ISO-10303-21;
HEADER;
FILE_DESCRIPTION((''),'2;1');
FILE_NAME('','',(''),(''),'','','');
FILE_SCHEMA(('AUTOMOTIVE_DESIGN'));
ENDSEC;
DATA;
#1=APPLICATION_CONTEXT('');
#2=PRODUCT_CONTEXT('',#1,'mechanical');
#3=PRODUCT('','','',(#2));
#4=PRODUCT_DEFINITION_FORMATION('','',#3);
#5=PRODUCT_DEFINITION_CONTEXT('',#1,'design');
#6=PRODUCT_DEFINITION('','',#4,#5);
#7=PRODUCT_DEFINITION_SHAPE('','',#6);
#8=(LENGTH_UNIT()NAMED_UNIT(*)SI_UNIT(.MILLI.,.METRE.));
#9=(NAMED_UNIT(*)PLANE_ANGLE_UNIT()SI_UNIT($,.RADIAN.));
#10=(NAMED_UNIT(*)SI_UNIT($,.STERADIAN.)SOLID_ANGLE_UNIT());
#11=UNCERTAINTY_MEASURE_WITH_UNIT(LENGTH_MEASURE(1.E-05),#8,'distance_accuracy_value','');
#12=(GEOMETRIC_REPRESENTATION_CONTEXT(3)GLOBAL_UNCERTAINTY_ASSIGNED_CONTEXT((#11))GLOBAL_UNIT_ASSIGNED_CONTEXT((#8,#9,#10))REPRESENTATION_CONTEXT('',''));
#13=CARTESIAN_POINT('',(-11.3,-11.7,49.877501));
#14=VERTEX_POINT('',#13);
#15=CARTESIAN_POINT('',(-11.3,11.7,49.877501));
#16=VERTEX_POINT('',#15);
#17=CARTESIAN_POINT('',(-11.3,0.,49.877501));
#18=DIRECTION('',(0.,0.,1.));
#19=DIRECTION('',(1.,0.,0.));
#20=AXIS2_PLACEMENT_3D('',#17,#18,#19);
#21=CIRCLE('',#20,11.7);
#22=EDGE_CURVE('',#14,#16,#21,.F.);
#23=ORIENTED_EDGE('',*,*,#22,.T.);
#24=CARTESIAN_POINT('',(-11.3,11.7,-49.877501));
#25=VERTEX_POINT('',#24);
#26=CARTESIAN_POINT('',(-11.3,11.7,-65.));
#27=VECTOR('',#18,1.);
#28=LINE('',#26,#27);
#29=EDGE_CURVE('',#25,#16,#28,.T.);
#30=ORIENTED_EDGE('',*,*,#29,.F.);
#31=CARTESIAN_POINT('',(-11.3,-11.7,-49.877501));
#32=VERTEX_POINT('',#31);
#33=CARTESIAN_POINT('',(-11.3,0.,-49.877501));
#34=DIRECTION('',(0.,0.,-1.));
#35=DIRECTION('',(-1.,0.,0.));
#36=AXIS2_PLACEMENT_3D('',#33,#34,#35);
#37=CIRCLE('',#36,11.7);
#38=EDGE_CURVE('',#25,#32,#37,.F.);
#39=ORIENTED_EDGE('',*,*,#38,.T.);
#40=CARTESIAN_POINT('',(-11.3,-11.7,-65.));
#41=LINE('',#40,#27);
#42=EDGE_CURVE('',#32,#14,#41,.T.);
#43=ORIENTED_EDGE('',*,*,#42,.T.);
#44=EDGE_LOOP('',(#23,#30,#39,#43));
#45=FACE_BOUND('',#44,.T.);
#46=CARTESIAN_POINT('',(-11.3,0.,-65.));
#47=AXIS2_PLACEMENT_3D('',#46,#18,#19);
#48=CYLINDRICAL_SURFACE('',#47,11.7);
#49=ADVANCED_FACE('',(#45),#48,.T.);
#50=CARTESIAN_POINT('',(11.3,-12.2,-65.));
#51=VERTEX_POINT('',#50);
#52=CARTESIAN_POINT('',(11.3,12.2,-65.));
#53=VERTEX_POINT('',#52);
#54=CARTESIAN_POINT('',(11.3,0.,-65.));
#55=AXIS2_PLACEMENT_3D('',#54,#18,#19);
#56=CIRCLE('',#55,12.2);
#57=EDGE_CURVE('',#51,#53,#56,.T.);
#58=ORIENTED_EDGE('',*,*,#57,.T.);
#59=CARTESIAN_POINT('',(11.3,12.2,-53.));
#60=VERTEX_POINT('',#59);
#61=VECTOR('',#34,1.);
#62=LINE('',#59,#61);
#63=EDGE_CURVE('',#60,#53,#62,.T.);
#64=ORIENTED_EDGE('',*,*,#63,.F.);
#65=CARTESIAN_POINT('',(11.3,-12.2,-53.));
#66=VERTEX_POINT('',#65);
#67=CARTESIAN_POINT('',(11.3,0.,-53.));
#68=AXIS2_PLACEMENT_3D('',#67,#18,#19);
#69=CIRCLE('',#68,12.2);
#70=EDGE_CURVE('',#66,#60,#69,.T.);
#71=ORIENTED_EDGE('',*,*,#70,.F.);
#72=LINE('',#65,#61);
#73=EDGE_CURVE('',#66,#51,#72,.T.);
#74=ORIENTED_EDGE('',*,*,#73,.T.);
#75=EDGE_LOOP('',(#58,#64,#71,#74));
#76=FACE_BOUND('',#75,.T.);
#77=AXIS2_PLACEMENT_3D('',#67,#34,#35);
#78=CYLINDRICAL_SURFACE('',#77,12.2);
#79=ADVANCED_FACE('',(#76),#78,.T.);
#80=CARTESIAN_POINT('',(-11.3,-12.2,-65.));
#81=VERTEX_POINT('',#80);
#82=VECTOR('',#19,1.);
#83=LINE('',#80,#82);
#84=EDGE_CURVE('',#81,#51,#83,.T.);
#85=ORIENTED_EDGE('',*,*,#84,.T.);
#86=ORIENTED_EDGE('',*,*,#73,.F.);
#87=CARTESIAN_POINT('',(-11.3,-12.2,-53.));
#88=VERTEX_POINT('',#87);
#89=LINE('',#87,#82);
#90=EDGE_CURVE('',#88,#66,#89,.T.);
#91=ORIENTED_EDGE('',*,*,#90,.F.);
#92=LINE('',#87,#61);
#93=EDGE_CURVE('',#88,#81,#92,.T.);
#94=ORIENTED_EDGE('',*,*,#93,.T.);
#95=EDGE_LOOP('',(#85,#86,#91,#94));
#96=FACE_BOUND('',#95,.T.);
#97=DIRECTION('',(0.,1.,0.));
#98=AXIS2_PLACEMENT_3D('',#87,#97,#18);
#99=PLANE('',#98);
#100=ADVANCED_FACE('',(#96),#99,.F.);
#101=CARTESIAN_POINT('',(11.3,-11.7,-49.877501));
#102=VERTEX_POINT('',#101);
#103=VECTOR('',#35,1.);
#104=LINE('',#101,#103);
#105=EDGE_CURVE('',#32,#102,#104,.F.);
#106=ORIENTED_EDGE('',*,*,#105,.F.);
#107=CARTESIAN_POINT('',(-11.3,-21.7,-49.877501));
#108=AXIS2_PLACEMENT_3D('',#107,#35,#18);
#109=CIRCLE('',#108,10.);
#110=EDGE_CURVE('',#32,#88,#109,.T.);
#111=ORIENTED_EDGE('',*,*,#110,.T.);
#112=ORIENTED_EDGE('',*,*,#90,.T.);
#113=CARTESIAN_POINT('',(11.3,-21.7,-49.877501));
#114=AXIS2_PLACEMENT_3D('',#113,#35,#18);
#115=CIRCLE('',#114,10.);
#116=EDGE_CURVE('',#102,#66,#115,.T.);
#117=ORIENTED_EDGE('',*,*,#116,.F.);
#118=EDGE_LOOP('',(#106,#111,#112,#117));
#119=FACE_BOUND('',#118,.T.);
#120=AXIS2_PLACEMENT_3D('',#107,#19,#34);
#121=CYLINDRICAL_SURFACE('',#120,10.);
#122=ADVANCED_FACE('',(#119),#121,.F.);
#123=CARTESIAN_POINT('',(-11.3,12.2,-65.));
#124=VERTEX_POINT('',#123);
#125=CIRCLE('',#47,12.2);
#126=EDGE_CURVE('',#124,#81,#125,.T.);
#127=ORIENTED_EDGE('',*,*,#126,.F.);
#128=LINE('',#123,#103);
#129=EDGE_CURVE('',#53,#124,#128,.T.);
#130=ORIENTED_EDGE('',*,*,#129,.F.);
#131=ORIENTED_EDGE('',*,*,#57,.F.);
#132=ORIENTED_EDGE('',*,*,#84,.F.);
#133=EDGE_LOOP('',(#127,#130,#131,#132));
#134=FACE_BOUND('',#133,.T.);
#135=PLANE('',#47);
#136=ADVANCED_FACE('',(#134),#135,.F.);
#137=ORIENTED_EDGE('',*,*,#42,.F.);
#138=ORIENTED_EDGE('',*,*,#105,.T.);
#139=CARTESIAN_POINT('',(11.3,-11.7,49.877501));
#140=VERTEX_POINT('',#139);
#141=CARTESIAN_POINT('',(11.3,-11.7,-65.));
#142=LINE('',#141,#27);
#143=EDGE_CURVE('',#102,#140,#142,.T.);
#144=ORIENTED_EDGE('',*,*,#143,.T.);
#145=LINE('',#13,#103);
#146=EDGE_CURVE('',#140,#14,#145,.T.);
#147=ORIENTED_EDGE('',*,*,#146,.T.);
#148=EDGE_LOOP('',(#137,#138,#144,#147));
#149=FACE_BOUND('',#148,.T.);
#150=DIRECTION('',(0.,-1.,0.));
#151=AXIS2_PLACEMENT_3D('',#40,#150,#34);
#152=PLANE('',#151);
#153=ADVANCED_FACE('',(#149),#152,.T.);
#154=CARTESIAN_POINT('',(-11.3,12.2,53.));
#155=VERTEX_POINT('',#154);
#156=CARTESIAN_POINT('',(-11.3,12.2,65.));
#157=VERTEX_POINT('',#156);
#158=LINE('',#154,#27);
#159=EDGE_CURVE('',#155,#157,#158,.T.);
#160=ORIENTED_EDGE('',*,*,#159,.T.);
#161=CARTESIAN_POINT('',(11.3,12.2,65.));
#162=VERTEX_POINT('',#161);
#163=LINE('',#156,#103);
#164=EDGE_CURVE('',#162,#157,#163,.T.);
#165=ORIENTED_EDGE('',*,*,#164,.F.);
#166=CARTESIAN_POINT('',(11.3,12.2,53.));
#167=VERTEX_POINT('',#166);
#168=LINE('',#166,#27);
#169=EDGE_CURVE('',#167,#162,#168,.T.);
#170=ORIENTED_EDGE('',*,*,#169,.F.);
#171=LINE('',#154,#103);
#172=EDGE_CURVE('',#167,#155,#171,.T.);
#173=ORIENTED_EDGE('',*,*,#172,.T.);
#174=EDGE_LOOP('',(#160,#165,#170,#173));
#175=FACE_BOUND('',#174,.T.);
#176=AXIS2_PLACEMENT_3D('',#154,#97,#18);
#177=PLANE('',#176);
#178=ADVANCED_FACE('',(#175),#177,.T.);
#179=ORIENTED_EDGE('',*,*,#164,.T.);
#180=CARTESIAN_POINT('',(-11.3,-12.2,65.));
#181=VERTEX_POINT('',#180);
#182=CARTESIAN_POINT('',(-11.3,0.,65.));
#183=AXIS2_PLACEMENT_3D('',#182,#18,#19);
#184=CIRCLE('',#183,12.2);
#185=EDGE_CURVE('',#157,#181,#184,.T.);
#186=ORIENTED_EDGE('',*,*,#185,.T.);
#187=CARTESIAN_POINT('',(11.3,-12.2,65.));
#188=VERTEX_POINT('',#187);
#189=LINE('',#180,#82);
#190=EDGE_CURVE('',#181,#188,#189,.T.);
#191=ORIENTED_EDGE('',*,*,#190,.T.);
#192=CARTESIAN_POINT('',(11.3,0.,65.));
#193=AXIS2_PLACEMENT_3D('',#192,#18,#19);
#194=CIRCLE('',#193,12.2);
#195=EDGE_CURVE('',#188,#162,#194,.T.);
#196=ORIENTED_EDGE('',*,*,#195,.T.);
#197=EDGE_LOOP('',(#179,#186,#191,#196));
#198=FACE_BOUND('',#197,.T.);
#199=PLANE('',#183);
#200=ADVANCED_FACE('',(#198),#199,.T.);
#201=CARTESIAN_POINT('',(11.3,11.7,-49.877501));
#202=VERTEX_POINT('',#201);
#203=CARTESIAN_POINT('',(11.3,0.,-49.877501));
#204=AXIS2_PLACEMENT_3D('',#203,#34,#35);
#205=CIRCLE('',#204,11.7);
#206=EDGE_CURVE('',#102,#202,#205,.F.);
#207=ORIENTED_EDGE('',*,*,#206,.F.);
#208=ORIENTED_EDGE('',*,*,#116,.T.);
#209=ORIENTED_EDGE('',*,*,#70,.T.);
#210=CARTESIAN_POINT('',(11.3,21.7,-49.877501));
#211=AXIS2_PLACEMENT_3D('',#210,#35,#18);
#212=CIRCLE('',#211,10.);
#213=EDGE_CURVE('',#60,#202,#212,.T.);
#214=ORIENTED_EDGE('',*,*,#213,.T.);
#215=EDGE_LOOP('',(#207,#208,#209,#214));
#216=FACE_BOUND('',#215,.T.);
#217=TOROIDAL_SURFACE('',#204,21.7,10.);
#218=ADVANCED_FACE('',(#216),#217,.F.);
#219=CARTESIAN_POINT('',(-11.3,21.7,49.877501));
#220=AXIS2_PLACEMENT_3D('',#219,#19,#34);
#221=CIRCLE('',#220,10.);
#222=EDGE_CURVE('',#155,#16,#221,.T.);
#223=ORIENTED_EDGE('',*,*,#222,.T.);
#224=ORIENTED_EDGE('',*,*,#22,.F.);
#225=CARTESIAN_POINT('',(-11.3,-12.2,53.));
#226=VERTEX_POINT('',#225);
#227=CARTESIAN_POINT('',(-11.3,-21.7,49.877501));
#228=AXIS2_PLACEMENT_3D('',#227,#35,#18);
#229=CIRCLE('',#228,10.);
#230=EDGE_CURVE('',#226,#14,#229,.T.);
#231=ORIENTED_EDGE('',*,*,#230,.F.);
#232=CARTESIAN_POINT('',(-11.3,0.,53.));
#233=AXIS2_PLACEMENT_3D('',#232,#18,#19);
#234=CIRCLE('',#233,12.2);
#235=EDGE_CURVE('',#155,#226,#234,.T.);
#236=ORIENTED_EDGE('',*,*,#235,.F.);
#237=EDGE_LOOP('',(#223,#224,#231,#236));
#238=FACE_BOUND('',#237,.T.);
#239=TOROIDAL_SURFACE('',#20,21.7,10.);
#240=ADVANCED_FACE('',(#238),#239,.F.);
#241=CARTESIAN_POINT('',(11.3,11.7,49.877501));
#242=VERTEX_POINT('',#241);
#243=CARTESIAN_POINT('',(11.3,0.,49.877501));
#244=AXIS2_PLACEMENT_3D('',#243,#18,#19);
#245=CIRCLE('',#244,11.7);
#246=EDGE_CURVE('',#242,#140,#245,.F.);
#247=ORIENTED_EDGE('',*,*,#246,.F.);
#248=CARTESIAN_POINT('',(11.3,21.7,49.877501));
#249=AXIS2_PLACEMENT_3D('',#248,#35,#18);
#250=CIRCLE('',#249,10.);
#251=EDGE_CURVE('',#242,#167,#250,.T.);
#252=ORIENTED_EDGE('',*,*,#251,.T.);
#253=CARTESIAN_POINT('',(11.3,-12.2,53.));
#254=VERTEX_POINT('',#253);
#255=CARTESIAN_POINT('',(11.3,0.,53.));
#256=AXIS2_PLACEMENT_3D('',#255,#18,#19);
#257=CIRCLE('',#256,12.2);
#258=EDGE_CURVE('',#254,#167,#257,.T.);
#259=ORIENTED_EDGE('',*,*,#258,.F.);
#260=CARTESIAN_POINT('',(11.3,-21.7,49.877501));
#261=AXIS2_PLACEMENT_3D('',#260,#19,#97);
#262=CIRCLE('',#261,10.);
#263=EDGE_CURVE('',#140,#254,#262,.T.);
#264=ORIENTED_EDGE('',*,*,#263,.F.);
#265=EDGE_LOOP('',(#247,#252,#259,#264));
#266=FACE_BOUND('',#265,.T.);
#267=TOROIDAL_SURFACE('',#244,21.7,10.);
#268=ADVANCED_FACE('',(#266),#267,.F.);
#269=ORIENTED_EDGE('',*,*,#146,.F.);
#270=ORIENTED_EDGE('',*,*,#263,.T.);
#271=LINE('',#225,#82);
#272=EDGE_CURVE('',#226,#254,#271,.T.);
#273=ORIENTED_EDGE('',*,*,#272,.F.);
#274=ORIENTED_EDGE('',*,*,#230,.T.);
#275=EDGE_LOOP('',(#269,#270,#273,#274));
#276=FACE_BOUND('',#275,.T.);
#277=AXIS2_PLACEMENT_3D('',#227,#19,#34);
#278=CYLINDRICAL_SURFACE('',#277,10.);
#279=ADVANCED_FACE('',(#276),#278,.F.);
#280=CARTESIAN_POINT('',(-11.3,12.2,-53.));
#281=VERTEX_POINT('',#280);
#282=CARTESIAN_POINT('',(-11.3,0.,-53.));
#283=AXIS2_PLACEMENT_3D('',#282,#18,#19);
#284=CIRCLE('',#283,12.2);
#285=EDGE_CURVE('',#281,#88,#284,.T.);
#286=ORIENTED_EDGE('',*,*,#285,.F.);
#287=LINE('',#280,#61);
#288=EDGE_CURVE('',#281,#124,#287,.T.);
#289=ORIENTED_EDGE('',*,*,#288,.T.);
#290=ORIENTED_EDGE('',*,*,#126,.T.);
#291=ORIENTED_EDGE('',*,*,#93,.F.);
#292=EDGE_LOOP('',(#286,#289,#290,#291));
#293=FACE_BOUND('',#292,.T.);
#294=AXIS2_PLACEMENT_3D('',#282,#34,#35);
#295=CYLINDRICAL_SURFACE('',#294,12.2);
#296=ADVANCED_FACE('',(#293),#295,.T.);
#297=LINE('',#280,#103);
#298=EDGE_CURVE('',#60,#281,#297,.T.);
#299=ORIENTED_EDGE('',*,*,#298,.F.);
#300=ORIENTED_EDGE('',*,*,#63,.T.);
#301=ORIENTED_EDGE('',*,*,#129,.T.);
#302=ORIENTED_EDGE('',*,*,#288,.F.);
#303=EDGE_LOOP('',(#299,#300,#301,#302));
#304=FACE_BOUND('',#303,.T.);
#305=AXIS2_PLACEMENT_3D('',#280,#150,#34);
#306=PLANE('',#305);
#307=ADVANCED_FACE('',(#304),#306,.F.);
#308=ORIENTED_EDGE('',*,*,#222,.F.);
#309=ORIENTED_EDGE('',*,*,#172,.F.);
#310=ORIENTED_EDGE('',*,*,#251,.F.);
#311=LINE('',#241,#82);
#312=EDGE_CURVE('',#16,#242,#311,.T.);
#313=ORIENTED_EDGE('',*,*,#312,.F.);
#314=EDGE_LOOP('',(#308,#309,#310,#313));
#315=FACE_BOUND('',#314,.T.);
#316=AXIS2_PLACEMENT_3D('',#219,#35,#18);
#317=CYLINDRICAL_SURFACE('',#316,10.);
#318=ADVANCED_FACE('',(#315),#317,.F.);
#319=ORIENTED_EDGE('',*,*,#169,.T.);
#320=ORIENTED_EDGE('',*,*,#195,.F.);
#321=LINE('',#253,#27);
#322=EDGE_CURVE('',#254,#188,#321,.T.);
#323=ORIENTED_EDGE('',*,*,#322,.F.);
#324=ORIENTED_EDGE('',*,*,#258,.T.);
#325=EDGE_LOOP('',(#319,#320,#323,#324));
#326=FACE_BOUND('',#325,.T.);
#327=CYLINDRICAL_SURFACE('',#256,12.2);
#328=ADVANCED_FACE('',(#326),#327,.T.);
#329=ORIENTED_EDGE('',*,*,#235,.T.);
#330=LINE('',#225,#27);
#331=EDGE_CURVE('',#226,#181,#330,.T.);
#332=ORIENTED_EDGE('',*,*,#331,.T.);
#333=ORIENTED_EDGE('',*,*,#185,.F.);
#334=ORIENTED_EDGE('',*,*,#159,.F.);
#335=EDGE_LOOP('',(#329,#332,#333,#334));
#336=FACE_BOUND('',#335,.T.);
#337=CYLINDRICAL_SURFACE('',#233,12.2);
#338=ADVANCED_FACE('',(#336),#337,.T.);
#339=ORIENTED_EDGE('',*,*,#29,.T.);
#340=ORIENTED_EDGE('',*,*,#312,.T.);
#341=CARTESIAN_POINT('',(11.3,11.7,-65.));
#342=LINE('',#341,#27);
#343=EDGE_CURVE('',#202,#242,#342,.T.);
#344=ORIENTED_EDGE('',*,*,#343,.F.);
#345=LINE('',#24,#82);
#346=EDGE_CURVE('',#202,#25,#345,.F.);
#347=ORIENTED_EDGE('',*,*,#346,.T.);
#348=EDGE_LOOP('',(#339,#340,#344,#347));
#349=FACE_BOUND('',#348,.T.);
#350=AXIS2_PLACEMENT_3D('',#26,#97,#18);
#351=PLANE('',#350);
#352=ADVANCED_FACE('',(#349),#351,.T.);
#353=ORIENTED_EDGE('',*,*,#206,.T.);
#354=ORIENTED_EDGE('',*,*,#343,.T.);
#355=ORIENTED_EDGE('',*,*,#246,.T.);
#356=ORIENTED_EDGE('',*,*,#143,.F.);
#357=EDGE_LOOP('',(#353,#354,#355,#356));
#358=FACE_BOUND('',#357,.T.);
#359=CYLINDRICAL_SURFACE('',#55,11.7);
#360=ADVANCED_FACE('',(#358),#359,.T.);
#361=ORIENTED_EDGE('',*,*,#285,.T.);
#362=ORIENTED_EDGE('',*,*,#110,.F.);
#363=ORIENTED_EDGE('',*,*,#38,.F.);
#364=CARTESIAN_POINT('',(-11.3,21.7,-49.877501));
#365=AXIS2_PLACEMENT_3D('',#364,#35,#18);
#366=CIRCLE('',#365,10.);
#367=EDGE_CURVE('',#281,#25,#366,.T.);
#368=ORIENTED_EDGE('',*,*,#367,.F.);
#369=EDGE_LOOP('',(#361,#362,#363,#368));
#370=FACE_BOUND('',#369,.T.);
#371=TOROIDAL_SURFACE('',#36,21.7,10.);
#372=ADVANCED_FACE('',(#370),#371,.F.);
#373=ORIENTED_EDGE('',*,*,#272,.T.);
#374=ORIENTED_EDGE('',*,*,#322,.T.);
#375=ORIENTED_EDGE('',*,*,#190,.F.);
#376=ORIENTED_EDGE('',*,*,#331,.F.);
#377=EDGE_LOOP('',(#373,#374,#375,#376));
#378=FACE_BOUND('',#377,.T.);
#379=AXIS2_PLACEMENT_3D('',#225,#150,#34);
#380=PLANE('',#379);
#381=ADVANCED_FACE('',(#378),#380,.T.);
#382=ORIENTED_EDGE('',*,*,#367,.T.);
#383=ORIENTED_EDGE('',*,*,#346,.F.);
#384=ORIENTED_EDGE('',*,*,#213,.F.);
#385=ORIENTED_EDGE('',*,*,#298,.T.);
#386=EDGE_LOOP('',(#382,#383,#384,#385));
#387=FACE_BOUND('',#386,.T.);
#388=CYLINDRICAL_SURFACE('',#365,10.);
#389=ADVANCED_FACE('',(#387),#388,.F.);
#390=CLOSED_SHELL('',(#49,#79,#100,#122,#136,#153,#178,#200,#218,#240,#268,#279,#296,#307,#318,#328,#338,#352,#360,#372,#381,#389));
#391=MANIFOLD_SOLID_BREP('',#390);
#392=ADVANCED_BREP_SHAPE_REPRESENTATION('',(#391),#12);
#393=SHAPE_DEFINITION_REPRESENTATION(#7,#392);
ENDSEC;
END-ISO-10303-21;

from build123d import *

# Parameters (mm, degrees)
BOSS_EXTRUDE1_DEPTH      = 65
BOSS_EXTRUDE1_DEPTH_BACK = 65
BOSS_EXTRUDE2_DEPTH      = 12
FILLET1_R                = 10
FILLET2_R                = 10


with BuildPart() as part:
    # Sketch1 → Boss-Extrude1 (new, two sides: drawn at the far end of the back side and taken through both)
    with BuildSketch(Plane.XY.offset(-BOSS_EXTRUDE1_DEPTH_BACK)):
        with BuildLine():
            Line((-11.3, 11.7), (11.3, 11.7))
            ThreePointArc((11.3, 11.7), (23, 0), (11.3, -11.7))
            Line((11.3, -11.7), (-11.3, -11.7))
            ThreePointArc((-11.3, -11.7), (-23, 0), (-11.3, 11.7))
        make_face()
    extrude(amount=BOSS_EXTRUDE1_DEPTH + BOSS_EXTRUDE1_DEPTH_BACK)

    # Sketch2 → Boss-Extrude2 (add)
    with BuildSketch(Plane.XY.offset(65)):
        with BuildLine():
            Line((-11.3, 12.2), (11.3, 12.2))
            ThreePointArc((11.3, 12.2), (23.5, 0), (11.3, -12.2))
            Line((11.3, -12.2), (-11.3, -12.2))
            ThreePointArc((-11.3, -12.2), (-23.5, 0), (-11.3, 12.2))
        make_face()
    boss_extrude2 = extrude(amount=-BOSS_EXTRUDE2_DEPTH)

    # Mirror1: Boss-Extrude2 across plane
    add(boss_extrude2.mirror(Plane.XY))

    # Fillet1
    # the kernel refuses this fillet: 10 mm, written as the material it adds along each edge
    with BuildSketch(Plane(origin=(-11.3, -11.7, 53), x_dir=(0, -1.0, -2.188471626126437e-12), z_dir=(1, 0, 0)), Plane(origin=(11.3, 11.7, 53), x_dir=(0, 1.0, -2.188471626126375e-12), z_dir=(-1, 0, 0))) as fillet1_piece_1:
        with BuildLine():
            CenterArc((10, 3.122498999), FILLET1_R, 180, 18.194872339)
            Line((0, 3.122498999), (-0.2, 3.122498999))
            Line((-0.2, 3.122498999), (-0.2, 0))
            Line((-0.2, 0), (0, -0.2))
            ThreePointArc((0, -0.2), (0.25, -0.2), (0.31, -0.06244998))
            Line((0.31, -0.06244998), (0.5, 0))
        make_face()
    extrude(amount=22.6)
    with BuildSketch(Plane(origin=(-11.3, 0, 53), x_dir=(0, -1, 0), z_dir=(1, 0, 0))) as fillet1_piece_2:
        with BuildLine():
            CenterArc((21.7, 3.122498999), FILLET1_R, 180, 18.194872339)
            Line((11.7, 3.122498999), (11.5, 3.122498999))
            Line((11.5, 3.122498999), (11.5, 0))
            Line((11.5, 0), (11.7, -0.2))
            ThreePointArc((11.7, -0.2), (11.95, -0.2), (12.01, -0.06244998))
            Line((12.01, -0.06244998), (12.2, 0))
        make_face()
    revolve(axis=Axis((-11.3, 0, 53), (0, 0, -1)), revolution_arc=180)
    with BuildSketch(Plane(origin=(11.3, 0, 53), x_dir=(0, 1, 0), z_dir=(-1, 0, 0))) as fillet1_piece_3:
        with BuildLine():
            CenterArc((21.7, 3.122498999), FILLET1_R, 180, 18.194872339)
            Line((11.7, 3.122498999), (11.5, 3.122498999))
            Line((11.5, 3.122498999), (11.5, 0))
            Line((11.5, 0), (11.7, -0.2))
            ThreePointArc((11.7, -0.2), (11.95, -0.2), (12.01, -0.06244998))
            Line((12.01, -0.06244998), (12.2, 0))
        make_face()
    revolve(axis=Axis((11.3, 0, 53), (0, 0, -1)), revolution_arc=180)

    # Fillet2
    # the kernel refuses this fillet: 10 mm, written as the material it adds along each edge
    with BuildSketch(Plane(origin=(-11.3, -11.7, -53), x_dir=(0, -1.0, 2.188471626126437e-12), z_dir=(1, 0, 0))) as fillet2_piece_1:
        with BuildLine():
            CenterArc((10, -3.122498999), FILLET2_R, 161.805127661, 18.194872339)
            Line((0, -3.122498999), (-0.2, -3.122498999))
            Line((-0.2, -3.122498999), (-0.2, 0))
            Line((-0.2, 0), (0, 0.2))
            ThreePointArc((0, 0.2), (0.25, 0.2), (0.31, 0.06244998))
            Line((0.31, 0.06244998), (0.5, 0))
        make_face()
    extrude(amount=22.6)
    with BuildSketch(Plane(origin=(11.3, 11.7, -53), x_dir=(0, 0, 1), z_dir=(-1, 0, 0))) as fillet2_piece_2:
        with BuildLine():
            CenterArc((3.122498999, 10), FILLET2_R, 251.805127661, 18.194872339)
            Line((0, 0.5), (-0.06244998, 0.31))
            ThreePointArc((-0.06244998, 0.31), (-0.2, 0.25), (-0.2, 0))
            Line((-0.2, 0), (0, -0.2))
            Line((0, -0.2), (3.122498999, -0.2))
            Line((3.122498999, -0.2), (3.122498999, 0))
        make_face()
    extrude(amount=22.6)
    with BuildSketch(Plane(origin=(-11.3, 0, -53), x_dir=(0, -1, 0), z_dir=(1, 0, 0))) as fillet2_piece_3:
        with BuildLine():
            CenterArc((21.7, -3.122498999), FILLET2_R, 161.805127661, 18.194872339)
            Line((11.7, -3.122498999), (11.5, -3.122498999))
            Line((11.5, -3.122498999), (11.5, 0))
            Line((11.5, 0), (11.7, 0.2))
            ThreePointArc((11.7, 0.2), (11.95, 0.2), (12.01, 0.06244998))
            Line((12.01, 0.06244998), (12.2, 0))
        make_face()
    revolve(axis=Axis((-11.3, 0, -53), (0, 0, -1)), revolution_arc=180)
    with BuildSketch(Plane(origin=(11.3, 0, -53), x_dir=(0, 1, 0), z_dir=(-1, 0, 0))) as fillet2_piece_4:
        with BuildLine():
            CenterArc((21.7, -3.122498999), FILLET2_R, 161.805127661, 18.194872339)
            Line((12.2, 0), (12.01, 0.06244998))
            ThreePointArc((12.01, 0.06244998), (11.95, 0.2), (11.7, 0.2))
            Line((11.7, 0.2), (11.5, 0))
            Line((11.5, 0), (11.5, -3.122498999))
            Line((11.5, -3.122498999), (11.7, -3.122498999))
        make_face()
    revolve(axis=Axis((11.3, 0, -53), (0, 0, -1)), revolution_arc=180)


solid = part.part
